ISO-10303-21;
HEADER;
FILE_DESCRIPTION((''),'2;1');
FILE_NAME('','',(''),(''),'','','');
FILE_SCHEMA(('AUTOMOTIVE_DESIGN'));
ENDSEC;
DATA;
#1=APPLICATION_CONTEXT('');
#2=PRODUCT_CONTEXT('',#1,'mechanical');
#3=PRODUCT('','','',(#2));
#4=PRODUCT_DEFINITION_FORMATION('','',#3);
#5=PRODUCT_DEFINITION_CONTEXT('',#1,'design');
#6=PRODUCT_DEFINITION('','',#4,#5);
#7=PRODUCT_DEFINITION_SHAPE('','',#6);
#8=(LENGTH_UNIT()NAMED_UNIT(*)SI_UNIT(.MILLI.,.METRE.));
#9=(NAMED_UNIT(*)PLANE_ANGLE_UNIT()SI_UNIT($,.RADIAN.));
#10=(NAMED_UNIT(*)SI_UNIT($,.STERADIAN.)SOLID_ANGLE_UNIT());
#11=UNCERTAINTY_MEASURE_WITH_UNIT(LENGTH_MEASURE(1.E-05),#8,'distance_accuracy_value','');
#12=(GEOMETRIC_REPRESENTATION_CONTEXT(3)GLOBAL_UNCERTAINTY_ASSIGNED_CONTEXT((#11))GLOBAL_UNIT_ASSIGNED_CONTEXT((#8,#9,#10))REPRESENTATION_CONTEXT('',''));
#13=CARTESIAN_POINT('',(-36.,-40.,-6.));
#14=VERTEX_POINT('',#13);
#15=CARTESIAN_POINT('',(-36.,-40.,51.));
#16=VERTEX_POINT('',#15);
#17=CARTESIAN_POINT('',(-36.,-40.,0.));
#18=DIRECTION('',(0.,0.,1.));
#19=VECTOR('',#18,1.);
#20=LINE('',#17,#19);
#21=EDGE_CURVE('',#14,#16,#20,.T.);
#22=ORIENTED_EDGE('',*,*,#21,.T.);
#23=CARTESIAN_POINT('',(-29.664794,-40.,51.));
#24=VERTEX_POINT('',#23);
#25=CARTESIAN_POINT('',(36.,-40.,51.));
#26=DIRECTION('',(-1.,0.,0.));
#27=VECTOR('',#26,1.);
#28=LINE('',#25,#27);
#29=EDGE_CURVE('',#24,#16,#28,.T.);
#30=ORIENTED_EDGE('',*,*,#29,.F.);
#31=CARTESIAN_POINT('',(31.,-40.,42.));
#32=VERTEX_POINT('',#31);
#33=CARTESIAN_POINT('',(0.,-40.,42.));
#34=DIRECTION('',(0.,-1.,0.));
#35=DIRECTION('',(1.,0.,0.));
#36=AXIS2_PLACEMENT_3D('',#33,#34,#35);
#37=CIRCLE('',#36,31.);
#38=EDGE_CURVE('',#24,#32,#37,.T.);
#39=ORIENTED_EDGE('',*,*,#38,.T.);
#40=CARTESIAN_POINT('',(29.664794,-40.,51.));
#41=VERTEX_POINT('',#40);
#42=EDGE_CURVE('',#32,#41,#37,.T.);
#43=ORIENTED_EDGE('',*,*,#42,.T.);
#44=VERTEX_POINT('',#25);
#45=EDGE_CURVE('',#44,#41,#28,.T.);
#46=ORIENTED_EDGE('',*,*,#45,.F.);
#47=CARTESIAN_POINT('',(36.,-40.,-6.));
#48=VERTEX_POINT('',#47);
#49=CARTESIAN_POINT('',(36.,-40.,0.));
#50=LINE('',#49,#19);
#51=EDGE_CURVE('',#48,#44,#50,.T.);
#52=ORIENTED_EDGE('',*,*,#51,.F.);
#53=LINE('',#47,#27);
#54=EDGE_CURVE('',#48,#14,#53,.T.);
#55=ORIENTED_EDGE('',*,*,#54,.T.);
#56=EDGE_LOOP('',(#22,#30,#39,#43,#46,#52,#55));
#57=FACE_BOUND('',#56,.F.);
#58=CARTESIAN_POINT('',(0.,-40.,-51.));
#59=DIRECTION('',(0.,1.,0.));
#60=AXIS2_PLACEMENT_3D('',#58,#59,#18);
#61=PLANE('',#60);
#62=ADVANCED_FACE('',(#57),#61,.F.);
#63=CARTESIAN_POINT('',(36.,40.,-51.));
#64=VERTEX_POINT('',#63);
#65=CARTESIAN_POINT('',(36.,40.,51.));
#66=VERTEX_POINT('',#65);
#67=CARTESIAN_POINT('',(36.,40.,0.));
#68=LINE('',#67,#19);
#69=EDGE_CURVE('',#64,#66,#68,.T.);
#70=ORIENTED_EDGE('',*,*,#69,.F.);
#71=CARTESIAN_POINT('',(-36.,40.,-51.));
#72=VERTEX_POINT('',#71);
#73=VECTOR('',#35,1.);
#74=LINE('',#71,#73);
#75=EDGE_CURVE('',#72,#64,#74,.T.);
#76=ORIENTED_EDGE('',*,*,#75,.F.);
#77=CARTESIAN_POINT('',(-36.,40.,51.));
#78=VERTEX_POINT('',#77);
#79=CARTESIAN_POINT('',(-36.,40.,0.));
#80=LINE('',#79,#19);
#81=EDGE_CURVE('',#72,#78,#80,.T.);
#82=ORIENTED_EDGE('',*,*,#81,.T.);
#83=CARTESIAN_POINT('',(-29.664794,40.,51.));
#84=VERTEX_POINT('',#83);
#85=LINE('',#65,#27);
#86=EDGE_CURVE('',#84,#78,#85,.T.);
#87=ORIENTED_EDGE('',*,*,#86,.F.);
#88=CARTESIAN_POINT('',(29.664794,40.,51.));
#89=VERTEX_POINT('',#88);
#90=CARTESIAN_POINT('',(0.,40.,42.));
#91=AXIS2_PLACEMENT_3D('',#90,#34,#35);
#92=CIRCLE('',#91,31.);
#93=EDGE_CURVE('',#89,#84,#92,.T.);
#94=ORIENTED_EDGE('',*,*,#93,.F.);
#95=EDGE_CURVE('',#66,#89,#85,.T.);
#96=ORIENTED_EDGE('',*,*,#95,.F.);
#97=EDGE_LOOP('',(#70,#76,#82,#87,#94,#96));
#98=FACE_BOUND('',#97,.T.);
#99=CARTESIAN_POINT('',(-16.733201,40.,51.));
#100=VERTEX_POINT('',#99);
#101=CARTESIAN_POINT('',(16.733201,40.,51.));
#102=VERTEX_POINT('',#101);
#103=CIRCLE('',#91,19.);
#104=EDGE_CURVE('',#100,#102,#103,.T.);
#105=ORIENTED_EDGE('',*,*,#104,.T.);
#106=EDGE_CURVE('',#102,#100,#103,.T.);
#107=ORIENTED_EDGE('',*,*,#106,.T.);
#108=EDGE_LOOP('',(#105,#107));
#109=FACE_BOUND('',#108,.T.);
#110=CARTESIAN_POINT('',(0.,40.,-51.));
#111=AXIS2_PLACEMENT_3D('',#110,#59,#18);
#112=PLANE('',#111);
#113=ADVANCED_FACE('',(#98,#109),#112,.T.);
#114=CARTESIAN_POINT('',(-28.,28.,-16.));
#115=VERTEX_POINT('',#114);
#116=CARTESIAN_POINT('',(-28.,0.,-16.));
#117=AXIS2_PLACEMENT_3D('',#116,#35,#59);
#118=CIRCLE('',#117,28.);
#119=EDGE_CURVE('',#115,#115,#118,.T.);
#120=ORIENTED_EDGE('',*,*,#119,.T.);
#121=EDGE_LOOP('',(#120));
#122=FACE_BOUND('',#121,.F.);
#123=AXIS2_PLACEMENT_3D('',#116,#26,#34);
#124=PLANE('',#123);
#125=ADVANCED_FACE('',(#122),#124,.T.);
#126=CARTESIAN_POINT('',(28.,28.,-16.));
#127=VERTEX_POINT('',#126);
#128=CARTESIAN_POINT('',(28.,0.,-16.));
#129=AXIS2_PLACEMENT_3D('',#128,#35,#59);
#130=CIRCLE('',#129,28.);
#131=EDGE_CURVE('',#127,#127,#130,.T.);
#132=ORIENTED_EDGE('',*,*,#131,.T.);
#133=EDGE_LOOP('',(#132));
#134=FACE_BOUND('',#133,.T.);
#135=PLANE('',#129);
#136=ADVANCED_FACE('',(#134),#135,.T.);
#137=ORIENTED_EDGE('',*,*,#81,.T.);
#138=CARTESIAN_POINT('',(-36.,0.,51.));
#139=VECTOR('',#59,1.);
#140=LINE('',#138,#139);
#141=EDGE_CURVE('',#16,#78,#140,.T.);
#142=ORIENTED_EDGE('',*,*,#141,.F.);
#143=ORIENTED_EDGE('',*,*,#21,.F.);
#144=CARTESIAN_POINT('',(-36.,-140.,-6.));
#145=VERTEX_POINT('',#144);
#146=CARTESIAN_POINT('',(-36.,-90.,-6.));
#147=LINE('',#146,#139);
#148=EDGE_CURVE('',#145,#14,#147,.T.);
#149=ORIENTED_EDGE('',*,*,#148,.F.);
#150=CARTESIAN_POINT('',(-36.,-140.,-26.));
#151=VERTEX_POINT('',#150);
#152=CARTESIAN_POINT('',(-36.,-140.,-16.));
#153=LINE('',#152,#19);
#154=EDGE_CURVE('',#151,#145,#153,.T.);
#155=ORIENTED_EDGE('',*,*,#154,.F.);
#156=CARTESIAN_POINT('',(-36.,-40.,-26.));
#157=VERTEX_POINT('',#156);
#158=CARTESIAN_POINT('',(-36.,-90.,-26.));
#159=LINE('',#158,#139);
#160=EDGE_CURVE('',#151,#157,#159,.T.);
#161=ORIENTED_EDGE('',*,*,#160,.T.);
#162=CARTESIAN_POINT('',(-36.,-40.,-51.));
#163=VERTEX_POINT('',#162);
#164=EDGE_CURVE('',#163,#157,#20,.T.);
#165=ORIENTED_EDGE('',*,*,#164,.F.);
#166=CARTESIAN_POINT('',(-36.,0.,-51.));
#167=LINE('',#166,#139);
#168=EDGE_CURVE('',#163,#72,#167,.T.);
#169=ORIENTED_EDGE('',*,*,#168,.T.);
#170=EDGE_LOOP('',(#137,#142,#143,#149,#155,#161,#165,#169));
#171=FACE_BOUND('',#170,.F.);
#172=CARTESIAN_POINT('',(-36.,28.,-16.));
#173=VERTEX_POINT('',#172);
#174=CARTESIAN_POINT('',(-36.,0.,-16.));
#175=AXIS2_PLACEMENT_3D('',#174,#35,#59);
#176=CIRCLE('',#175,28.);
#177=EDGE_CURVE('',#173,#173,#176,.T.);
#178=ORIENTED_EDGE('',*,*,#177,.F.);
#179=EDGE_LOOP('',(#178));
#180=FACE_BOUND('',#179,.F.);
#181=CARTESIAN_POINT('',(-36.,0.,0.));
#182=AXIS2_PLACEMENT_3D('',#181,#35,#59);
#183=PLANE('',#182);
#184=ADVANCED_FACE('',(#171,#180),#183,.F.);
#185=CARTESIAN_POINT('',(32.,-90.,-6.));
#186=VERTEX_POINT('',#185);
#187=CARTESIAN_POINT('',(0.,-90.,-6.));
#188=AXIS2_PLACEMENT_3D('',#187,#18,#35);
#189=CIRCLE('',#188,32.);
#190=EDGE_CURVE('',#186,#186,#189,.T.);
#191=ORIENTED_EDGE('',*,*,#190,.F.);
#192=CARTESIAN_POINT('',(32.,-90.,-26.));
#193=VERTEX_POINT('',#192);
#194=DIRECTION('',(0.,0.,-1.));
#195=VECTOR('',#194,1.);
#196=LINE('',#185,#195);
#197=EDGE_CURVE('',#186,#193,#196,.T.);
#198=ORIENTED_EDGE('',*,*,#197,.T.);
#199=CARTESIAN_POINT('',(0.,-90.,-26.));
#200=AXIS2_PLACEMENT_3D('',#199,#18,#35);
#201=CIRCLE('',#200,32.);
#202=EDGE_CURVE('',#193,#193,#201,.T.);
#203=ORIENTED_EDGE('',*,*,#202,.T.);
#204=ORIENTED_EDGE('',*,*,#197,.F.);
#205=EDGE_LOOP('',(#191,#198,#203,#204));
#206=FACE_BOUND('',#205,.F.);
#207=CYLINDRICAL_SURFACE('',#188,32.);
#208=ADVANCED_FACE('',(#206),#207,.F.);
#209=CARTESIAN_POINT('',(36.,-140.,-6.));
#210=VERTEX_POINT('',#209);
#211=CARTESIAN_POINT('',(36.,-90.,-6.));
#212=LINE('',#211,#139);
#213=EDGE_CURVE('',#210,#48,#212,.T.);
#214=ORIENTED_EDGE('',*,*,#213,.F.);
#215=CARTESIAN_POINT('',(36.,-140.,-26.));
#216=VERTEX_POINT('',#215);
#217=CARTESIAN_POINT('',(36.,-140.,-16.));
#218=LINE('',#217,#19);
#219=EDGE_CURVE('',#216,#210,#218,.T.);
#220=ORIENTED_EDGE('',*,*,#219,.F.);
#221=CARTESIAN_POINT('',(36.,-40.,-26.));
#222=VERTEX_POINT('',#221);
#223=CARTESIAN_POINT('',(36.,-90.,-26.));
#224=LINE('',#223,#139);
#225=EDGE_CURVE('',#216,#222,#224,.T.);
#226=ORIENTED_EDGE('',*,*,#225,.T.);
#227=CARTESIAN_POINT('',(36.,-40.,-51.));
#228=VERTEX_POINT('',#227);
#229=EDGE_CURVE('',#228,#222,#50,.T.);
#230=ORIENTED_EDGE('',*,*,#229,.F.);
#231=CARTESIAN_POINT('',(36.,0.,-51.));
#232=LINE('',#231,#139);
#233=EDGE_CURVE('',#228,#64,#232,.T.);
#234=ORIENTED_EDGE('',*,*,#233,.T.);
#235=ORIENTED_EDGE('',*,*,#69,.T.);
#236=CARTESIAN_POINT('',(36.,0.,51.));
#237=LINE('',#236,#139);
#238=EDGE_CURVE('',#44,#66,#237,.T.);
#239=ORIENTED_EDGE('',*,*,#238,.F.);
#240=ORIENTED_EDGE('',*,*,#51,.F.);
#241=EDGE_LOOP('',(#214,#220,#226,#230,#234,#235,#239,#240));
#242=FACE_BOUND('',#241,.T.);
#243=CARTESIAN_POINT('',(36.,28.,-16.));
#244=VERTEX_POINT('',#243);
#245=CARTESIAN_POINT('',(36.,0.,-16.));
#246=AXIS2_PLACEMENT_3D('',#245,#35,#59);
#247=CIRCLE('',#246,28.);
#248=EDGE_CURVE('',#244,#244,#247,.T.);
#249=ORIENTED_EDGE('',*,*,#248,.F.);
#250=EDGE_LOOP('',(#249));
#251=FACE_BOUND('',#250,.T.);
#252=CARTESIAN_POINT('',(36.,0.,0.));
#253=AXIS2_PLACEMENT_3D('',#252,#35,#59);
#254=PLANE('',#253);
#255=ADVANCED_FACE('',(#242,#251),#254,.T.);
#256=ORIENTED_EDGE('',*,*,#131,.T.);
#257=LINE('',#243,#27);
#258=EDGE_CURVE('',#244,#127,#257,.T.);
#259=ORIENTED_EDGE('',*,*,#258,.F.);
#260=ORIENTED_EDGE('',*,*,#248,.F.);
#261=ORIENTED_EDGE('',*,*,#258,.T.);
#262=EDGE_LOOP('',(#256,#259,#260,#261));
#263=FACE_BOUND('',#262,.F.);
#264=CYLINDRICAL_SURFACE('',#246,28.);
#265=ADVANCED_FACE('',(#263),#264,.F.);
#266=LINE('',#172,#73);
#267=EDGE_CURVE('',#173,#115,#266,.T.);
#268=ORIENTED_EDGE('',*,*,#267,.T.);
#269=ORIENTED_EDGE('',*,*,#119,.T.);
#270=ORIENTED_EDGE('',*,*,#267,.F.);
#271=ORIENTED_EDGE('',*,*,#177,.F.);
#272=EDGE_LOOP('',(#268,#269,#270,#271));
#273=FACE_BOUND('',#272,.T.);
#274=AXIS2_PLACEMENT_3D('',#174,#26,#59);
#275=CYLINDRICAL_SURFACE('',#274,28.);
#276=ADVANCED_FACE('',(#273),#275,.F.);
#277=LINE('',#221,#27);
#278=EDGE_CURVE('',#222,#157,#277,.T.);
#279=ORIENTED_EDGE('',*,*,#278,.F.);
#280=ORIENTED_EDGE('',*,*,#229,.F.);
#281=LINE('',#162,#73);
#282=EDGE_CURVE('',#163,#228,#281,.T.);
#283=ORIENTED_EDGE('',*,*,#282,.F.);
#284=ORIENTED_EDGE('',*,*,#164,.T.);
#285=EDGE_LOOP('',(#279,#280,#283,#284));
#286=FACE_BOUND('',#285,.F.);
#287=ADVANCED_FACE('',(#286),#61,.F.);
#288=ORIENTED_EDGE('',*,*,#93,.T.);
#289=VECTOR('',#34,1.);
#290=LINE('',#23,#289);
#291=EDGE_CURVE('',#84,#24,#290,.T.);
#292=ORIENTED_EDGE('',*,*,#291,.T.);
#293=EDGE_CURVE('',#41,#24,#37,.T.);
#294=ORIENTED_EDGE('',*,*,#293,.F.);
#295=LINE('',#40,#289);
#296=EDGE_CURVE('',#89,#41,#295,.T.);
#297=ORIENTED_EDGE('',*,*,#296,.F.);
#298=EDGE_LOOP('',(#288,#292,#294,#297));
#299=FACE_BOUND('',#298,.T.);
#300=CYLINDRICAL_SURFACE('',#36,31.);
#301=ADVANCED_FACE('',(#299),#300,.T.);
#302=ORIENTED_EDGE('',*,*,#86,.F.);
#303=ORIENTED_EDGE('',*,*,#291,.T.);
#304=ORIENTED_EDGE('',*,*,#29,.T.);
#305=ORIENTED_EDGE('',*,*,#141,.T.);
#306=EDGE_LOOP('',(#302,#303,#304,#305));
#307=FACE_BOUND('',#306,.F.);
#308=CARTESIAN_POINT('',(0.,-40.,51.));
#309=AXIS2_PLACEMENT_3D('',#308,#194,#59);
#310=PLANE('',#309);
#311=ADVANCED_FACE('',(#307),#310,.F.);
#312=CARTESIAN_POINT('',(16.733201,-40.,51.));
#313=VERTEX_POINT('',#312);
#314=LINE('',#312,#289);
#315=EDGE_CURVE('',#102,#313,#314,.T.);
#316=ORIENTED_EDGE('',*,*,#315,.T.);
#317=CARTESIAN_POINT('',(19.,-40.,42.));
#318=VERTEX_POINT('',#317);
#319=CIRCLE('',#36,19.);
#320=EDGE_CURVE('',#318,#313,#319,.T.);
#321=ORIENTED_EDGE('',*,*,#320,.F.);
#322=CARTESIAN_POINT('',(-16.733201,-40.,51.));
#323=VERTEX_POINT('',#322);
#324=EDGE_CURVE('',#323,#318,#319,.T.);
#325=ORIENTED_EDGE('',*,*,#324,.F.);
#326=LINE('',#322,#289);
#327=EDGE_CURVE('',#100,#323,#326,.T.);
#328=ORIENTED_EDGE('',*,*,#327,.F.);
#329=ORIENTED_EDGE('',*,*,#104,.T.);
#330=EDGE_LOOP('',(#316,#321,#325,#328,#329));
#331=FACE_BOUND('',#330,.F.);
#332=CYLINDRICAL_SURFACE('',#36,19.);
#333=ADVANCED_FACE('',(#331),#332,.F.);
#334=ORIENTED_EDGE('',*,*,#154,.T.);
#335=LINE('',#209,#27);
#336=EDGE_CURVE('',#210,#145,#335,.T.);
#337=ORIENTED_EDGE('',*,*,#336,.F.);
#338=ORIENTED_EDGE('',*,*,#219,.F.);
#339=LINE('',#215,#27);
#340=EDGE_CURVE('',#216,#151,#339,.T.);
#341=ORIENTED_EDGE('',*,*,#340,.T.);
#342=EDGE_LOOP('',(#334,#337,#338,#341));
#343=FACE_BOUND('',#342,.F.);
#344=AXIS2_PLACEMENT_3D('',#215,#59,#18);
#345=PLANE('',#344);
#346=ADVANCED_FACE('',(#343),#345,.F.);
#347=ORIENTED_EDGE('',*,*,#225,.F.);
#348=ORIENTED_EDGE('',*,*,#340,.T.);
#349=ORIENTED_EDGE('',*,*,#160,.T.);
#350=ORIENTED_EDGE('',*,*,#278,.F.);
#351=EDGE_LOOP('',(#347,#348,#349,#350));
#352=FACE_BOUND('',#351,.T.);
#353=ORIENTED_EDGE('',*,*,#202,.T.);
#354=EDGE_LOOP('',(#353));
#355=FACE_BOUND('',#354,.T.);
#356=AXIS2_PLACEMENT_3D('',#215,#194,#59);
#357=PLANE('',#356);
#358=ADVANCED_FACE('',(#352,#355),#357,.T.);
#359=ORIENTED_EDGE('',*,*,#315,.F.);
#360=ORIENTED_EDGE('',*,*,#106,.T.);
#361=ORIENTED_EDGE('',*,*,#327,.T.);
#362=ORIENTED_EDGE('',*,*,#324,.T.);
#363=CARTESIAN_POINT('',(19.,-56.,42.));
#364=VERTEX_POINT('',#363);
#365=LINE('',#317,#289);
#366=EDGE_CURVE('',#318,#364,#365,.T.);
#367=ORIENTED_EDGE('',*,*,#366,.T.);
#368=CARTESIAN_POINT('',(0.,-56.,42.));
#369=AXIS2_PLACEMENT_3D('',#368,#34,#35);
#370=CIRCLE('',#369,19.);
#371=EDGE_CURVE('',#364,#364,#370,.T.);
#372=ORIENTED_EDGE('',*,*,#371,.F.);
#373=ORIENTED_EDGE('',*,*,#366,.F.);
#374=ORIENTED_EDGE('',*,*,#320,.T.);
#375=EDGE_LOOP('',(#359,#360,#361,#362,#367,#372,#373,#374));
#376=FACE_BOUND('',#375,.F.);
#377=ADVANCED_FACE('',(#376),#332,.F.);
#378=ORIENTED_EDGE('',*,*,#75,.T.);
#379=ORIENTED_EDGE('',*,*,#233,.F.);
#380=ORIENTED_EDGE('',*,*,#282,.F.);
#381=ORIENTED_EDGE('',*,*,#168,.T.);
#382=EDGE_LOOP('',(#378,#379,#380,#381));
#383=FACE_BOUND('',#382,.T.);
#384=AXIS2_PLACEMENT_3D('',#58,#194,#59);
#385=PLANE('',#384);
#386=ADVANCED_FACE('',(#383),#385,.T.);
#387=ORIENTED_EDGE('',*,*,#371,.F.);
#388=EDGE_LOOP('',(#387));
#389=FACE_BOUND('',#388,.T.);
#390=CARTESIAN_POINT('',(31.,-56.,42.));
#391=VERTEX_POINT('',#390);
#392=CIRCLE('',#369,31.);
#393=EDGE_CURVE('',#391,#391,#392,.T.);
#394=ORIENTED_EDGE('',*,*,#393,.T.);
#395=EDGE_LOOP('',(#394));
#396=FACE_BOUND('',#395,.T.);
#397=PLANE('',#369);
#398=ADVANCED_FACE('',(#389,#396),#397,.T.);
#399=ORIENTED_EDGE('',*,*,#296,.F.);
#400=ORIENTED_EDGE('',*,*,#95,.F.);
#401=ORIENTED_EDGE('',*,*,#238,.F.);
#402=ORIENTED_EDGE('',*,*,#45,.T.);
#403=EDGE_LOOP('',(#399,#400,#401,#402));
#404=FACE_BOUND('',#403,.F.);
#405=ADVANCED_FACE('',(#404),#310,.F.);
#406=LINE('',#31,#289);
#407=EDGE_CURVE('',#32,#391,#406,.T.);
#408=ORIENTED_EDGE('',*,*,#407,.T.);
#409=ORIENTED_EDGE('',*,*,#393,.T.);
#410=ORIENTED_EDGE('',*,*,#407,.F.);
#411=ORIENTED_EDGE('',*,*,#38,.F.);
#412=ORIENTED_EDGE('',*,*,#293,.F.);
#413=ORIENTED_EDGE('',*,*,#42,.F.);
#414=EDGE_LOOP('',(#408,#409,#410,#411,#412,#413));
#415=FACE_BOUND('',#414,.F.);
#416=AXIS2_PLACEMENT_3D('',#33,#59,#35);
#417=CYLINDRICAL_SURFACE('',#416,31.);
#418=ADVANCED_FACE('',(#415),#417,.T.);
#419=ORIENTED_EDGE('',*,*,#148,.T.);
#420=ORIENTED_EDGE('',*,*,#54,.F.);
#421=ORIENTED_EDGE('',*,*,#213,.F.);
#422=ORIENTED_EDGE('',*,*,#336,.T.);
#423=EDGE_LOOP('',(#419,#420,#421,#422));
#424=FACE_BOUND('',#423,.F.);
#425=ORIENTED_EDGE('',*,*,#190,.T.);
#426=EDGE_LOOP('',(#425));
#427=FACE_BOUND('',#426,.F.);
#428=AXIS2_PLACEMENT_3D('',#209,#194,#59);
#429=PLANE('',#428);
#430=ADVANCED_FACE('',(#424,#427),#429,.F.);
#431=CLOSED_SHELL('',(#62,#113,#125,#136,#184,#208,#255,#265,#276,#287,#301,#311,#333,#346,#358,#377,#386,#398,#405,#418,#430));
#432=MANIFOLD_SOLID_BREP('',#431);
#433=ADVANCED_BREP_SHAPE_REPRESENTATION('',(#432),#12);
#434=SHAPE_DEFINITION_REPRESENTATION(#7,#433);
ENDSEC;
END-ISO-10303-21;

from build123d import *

# Parameters (mm, degrees)
F0_W          = 80
F0_H          = 102
F1_DEPTH      = 36
F2_W          = 100
F2_H          = 20
F3_DEPTH      = 72
F4_R          = 28
F5_DEPTH      = 8
F6_R          = 31
F6_R_2        = 19
F7_DEPTH      = 16
F7_DEPTH_BACK = 80
F8_DEPTH      = 80.001
F9_R          = 32
F10_DEPTH     = 45.001


# Not quite as in the source:
# - a pattern or mirror of a feature is missing from the dataset's text; its kind, count and spacing are read off the source's solid


with BuildPart() as f1:
    # F0 (on Right) → F1 (new body, symmetric)
    with BuildSketch(Plane.YZ):
        Rectangle(F0_W, F0_H)
    extrude(amount=F1_DEPTH, both=True)

    # F2 (on face) → F3 (join, through all)
    with BuildSketch(Plane.YZ.offset(36)):
        with Locations((-90, -16)):
            Rectangle(F2_W, F2_H)
    extrude(amount=-F3_DEPTH)

    # F4 (on face) → F5 (cut)
    with BuildSketch(Plane.YZ.offset(36)):
        with Locations((0, -16)):
            Circle(F4_R)
    f5 = extrude(amount=-F5_DEPTH, mode=Mode.SUBTRACT)

    # F5_copies: F5 across plane
    add(f5.mirror(Plane(origin=(0, 0, 0), x_dir=(0, 0, -1), z_dir=(-1, 0, 0))), mode=Mode.SUBTRACT)

    # F6 (on face) → F7 (join, two sides)
    with BuildSketch(Plane.XZ.offset(40)) as f7_sk:
        with Locations((0, 42)):
            Circle(F6_R)
        with Locations((0, 42)):
            Circle(F6_R_2, mode=Mode.SUBTRACT)
    extrude(amount=F7_DEPTH)
    extrude(f7_sk.sketch, amount=-F7_DEPTH_BACK)

    # F8 (cut, through all): a face of the model
    f8_faces = [f1.faces().sort_by_distance(p)[0] for p in [
        (0, -40, 38.5131332961),
    ]]
    extrude(f8_faces, amount=-F8_DEPTH, mode=Mode.SUBTRACT)

    # F9 (on face) → F10 (cut, through all)
    with BuildSketch(Plane.XY.offset(-6)):
        with Locations((0, -90)):
            Circle(F9_R)
    extrude(amount=-F10_DEPTH, mode=Mode.SUBTRACT)


solid = f1.part
